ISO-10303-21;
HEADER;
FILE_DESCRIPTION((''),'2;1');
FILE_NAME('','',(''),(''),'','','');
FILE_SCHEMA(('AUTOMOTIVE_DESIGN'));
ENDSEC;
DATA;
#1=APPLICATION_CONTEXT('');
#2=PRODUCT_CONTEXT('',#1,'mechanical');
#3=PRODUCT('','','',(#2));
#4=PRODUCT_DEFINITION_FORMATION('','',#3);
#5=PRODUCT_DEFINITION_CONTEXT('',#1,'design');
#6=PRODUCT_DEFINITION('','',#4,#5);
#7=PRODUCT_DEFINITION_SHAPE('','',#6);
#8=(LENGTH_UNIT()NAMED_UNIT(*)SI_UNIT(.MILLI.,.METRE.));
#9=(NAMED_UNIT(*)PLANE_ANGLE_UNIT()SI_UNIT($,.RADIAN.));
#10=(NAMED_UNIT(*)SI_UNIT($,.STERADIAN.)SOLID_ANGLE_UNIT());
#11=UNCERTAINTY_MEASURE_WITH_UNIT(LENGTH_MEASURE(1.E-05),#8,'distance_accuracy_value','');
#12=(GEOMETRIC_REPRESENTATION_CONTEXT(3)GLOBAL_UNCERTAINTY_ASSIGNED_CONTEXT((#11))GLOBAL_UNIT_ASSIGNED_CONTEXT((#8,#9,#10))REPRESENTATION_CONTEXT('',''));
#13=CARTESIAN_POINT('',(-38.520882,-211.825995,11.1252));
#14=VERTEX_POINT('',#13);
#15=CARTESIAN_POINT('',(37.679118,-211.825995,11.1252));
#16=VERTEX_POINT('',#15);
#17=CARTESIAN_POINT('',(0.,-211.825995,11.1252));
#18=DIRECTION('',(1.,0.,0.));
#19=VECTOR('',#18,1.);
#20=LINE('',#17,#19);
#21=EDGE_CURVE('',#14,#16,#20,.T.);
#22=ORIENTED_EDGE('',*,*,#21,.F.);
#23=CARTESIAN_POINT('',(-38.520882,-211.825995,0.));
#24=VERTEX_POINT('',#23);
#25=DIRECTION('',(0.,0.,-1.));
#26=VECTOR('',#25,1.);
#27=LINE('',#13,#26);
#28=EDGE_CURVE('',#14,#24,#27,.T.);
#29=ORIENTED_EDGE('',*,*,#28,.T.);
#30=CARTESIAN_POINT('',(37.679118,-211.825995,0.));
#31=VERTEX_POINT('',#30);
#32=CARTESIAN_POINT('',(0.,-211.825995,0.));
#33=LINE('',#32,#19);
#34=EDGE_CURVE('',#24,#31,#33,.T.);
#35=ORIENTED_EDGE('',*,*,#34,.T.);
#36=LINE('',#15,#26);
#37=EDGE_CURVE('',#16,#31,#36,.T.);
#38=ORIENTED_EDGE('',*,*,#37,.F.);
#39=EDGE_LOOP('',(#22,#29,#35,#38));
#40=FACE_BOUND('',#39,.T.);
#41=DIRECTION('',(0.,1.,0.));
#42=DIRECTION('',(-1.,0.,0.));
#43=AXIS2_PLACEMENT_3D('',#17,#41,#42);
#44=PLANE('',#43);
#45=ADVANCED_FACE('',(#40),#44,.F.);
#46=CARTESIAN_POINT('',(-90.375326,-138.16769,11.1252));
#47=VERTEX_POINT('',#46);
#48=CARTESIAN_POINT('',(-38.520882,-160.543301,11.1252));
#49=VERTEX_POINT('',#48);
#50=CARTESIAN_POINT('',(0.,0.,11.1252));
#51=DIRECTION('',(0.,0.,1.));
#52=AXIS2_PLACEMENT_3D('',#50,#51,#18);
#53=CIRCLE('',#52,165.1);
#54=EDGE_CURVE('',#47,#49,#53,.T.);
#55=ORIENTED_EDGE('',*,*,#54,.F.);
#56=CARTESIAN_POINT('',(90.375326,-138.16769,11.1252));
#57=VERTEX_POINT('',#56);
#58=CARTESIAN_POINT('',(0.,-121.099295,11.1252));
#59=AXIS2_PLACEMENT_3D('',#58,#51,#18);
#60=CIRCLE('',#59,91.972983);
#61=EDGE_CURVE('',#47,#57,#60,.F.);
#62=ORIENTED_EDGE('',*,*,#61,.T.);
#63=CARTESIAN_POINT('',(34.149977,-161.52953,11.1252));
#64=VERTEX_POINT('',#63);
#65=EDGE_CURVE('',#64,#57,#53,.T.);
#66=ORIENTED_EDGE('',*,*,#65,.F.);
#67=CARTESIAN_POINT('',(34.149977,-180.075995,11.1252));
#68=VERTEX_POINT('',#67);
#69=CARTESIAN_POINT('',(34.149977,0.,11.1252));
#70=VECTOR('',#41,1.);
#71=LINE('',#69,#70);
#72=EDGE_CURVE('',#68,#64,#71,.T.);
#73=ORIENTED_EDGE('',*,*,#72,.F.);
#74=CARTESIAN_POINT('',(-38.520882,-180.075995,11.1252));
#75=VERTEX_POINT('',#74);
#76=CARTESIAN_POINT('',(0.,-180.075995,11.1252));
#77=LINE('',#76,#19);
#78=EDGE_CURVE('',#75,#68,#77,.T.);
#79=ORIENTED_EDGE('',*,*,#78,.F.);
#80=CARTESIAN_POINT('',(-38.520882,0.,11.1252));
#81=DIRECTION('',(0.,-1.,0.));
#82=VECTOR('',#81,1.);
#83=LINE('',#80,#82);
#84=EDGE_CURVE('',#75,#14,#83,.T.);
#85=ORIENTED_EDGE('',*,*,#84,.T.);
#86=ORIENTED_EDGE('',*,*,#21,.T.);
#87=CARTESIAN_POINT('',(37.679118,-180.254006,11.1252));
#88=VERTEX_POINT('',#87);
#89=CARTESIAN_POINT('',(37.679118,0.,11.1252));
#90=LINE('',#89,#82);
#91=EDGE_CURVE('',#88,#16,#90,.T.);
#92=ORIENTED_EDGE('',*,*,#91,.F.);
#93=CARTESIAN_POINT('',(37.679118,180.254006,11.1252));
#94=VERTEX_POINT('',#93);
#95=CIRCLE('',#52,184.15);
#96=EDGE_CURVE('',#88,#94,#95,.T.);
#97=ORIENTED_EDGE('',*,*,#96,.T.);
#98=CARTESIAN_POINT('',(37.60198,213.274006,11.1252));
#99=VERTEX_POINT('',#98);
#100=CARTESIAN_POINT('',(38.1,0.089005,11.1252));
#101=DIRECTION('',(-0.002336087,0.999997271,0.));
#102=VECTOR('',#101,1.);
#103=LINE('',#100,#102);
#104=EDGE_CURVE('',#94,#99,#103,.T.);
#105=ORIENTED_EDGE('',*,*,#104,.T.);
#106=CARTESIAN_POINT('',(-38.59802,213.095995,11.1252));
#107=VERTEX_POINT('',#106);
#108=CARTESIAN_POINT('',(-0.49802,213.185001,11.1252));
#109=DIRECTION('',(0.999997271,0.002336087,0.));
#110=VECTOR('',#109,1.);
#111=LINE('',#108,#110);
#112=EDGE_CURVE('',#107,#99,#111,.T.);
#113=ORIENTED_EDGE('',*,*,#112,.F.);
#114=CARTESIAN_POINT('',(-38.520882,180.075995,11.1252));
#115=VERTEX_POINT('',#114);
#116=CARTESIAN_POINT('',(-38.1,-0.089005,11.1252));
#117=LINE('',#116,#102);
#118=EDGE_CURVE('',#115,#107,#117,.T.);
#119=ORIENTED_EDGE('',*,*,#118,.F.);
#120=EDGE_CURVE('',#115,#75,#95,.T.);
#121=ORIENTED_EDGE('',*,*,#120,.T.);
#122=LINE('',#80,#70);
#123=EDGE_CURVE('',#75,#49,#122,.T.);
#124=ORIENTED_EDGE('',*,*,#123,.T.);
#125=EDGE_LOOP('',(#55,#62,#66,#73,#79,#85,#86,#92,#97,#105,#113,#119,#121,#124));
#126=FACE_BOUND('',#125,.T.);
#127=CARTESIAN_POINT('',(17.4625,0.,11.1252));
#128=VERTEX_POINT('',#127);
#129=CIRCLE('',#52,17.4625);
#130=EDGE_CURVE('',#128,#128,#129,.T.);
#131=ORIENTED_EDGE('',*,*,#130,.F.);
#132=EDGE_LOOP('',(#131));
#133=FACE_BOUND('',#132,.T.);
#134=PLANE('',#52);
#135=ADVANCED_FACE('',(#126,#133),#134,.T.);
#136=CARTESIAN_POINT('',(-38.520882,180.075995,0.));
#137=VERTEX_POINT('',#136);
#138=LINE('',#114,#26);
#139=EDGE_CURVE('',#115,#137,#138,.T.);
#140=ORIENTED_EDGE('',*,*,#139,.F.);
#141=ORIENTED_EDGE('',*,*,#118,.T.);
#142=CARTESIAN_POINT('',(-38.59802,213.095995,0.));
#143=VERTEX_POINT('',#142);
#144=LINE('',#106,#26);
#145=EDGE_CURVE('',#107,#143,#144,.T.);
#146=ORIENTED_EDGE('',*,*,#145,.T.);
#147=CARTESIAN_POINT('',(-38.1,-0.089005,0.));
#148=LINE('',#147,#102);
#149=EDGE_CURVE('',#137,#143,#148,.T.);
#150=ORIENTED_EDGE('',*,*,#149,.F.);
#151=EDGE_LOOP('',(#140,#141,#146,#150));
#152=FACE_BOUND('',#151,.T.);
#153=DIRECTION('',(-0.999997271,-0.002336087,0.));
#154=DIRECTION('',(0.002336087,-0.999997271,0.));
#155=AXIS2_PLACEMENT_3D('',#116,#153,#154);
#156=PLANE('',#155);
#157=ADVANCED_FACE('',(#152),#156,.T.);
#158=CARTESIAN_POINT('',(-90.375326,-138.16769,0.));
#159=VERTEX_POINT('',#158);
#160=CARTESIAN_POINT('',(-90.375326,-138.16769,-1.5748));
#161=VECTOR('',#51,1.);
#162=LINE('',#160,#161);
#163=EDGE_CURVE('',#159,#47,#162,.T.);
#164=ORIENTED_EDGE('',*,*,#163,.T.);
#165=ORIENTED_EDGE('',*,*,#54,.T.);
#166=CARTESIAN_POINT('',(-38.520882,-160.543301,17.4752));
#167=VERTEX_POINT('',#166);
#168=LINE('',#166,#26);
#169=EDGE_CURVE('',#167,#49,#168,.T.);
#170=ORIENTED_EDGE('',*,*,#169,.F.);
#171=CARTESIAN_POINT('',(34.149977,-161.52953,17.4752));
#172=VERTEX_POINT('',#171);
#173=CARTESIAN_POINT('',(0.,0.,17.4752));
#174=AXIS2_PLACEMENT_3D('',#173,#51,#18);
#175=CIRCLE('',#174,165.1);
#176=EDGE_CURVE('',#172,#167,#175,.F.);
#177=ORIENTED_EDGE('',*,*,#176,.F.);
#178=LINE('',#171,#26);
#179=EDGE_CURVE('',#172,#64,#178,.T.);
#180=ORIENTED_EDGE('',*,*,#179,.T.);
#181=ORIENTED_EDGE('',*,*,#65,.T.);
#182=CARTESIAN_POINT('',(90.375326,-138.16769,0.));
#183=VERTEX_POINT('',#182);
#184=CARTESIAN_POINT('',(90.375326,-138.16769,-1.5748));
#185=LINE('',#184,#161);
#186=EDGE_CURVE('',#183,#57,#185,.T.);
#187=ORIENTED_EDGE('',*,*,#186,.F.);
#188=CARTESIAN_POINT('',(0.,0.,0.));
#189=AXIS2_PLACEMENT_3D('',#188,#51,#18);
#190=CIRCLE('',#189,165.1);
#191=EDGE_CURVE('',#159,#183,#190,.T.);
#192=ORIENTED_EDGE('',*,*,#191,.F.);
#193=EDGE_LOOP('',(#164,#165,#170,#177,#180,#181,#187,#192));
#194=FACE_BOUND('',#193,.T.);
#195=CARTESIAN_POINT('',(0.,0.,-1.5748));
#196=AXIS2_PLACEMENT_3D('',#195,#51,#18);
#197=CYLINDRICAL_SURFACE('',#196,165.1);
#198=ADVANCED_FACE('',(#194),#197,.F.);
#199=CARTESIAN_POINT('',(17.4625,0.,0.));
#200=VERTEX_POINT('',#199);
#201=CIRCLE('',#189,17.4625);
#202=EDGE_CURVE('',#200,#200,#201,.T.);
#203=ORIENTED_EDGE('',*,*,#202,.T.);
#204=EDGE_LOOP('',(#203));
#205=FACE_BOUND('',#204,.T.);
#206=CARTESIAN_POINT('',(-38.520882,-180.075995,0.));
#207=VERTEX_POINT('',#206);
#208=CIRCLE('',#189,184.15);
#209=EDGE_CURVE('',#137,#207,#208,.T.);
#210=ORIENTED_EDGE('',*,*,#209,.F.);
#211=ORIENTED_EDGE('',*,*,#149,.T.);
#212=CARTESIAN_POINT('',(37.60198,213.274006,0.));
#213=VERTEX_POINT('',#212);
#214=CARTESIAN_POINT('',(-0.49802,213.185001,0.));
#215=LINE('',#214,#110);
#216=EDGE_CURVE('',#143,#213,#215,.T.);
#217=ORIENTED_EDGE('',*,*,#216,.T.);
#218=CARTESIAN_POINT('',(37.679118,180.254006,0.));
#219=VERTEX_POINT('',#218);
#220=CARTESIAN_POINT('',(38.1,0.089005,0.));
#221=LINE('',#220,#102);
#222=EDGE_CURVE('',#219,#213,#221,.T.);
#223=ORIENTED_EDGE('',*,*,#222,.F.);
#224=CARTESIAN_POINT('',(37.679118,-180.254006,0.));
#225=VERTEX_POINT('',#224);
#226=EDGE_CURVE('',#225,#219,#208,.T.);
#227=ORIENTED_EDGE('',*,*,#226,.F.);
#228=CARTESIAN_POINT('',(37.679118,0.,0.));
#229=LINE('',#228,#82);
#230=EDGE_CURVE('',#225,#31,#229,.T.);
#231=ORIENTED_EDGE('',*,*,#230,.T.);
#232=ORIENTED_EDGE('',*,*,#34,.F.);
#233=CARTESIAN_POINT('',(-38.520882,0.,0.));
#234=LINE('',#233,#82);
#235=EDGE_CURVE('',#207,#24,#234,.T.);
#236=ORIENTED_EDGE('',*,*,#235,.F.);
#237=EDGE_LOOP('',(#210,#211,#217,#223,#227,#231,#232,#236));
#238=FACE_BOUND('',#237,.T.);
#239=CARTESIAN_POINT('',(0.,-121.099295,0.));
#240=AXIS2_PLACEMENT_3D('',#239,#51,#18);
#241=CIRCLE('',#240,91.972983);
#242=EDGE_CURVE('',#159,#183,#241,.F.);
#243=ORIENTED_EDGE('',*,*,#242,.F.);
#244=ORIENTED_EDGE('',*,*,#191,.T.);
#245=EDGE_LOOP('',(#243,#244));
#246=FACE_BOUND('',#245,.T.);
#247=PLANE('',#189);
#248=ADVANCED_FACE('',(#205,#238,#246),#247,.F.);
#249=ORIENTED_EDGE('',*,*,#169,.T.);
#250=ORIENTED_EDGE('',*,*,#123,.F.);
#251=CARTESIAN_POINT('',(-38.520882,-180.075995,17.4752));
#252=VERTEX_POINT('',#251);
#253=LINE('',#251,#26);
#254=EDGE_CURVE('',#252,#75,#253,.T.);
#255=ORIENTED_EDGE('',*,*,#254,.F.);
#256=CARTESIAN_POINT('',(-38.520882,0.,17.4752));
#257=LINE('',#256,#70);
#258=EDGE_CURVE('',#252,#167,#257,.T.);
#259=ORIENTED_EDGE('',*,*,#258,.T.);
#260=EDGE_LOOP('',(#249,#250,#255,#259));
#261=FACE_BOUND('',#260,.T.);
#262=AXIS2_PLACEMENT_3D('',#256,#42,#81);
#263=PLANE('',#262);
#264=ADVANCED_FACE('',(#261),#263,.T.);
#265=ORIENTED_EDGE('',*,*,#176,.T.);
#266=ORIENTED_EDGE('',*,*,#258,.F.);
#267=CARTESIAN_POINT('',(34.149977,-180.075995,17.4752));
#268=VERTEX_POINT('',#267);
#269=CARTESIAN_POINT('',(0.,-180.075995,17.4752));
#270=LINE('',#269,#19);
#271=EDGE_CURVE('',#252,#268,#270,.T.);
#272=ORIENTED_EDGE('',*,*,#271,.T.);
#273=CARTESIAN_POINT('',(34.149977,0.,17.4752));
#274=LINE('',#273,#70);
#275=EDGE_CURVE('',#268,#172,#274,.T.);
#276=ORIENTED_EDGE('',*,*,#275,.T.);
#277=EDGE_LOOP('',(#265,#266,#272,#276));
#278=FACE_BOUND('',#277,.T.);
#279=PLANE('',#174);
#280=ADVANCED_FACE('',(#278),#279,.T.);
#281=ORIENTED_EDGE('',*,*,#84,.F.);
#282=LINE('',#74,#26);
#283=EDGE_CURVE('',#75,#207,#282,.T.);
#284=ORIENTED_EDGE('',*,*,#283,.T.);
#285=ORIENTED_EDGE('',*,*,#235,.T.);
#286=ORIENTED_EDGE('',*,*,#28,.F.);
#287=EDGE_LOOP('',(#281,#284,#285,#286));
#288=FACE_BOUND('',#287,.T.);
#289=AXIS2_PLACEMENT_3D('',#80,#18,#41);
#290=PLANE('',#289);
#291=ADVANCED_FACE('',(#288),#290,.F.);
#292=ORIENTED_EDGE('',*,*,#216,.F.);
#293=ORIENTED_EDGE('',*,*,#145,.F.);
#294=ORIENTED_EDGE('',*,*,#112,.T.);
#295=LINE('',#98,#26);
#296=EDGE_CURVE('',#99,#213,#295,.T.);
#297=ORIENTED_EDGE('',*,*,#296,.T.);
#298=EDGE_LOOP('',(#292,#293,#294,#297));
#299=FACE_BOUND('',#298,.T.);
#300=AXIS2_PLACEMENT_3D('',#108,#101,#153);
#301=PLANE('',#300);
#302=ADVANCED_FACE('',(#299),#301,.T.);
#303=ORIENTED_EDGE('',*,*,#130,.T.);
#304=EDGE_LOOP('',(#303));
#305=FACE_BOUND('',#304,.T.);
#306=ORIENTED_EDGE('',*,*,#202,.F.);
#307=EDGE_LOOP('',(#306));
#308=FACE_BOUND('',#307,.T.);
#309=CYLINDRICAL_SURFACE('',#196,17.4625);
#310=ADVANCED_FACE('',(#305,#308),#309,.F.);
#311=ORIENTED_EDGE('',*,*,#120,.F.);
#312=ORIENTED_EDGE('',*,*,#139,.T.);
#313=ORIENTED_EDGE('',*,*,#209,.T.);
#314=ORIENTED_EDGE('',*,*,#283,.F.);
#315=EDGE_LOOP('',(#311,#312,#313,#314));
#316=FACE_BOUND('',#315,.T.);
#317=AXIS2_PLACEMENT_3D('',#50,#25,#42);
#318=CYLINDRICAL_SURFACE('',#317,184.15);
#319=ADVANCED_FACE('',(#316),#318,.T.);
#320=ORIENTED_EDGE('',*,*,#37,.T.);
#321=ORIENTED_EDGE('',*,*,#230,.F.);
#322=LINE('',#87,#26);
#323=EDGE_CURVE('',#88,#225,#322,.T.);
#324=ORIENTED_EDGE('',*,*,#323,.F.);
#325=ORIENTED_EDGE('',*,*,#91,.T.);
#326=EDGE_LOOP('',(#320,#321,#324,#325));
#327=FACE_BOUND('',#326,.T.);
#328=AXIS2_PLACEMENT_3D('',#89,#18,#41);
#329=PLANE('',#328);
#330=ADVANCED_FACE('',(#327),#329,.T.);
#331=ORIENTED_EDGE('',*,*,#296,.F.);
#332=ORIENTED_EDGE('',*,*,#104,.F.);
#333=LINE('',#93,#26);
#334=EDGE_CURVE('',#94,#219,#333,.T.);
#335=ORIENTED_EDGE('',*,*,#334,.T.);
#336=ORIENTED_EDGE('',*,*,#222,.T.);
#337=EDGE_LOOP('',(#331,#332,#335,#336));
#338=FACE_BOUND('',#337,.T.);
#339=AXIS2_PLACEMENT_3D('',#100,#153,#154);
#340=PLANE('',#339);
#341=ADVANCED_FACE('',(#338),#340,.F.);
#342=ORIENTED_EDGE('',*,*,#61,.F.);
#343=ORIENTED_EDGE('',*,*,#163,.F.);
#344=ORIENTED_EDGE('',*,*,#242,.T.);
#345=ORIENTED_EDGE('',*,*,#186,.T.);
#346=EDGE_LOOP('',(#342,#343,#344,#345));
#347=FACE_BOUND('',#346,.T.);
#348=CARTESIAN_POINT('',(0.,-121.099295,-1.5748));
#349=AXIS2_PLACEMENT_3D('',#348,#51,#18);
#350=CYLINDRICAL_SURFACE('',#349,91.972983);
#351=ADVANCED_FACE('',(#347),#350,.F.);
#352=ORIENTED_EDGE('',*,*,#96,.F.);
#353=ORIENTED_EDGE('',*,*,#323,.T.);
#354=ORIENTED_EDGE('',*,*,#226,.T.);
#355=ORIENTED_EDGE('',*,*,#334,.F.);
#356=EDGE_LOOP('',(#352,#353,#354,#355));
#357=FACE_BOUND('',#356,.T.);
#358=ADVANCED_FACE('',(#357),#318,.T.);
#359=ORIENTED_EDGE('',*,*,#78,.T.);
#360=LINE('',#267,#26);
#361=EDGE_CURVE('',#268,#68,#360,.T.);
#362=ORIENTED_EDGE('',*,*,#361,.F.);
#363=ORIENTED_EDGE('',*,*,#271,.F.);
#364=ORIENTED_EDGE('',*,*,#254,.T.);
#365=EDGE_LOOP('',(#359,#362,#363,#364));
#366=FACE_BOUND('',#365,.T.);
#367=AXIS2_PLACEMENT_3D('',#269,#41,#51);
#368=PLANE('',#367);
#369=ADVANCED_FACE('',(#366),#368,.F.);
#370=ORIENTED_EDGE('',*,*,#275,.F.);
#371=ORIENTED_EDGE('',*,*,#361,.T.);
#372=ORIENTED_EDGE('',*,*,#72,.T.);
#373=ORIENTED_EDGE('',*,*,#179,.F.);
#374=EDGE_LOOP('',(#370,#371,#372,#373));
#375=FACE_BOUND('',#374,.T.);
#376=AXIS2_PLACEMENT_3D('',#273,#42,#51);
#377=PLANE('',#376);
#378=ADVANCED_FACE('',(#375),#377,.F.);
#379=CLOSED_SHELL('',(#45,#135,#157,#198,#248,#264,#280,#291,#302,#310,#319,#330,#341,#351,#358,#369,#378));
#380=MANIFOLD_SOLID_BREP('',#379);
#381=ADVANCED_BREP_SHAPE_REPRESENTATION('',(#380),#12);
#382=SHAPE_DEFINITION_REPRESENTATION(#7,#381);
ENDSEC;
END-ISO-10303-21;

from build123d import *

# Parameters (mm, degrees)
BOSS_EXTRUDE1_DEPTH = 11.1252
SKETCH5_R           = 17.4625
CUT_EXTRUDE1_DEPTH  = 12.7
CUT_EXTRUDE4_DEPTH  = 12.7
BOSS_EXTRUDE2_START = 6.35
BOSS_EXTRUDE2_DEPTH = 6.35


with BuildPart() as part:
    # Sketch1 → Boss-Extrude1 (new body)
    with BuildSketch(Plane.XY):
        with BuildLine():
            Line((-38.598020157, 213.095995412), (-38.52088234, 180.075995412))
            ThreePointArc((-38.52088234, 180.075995412), (-184.15, 0), (-38.52088234, -180.075995412))
            Line((-38.52088234, -180.075995412), (-38.52088234, -211.825995412))
            Line((-38.52088234, -211.825995412), (37.67911766, -211.825995412))
            Line((37.67911766, -211.825995412), (37.67911766, -180.254005759))
            ThreePointArc((37.67911766, -180.254005759), (184.15, 0), (37.67911766, 180.254005759))
            Line((37.67911766, 180.254005759), (37.601979843, 213.274005759))
            Line((37.601979843, 213.274005759), (-38.598020157, 213.095995412))
        make_face()
    extrude(amount=BOSS_EXTRUDE1_DEPTH)

    # Sketch5 → Cut-Extrude1 (cut)
    with BuildSketch(Plane.XY.offset(11.1252)):
        Circle(SKETCH5_R)
    extrude(amount=-CUT_EXTRUDE1_DEPTH, mode=Mode.SUBTRACT)

    # Sketch6 → Cut-Extrude4 (cut)
    with BuildSketch(Plane.XY.offset(11.1252)):
        with BuildLine():
            ThreePointArc((90.375326038, -138.167689579), (0, -29.126312042), (-90.375326038, -138.167689579))
            ThreePointArc((-90.375326038, -138.167689579), (0, -165.1), (90.375326038, -138.167689579))
        make_face()
    extrude(amount=-CUT_EXTRUDE4_DEPTH, mode=Mode.SUBTRACT)

    # Sketch7 → Boss-Extrude2 (add)
    with BuildSketch(Plane.XY.offset(11.1252).offset(BOSS_EXTRUDE2_START)):
        with BuildLine():
            Line((-38.52088234, -160.543301398), (-38.52088234, -180.075995412))
            Line((-38.52088234, -180.075995412), (34.149976763, -180.075995412))
            Line((34.149976763, -180.075995412), (34.149976763, -161.529530078))
            ThreePointArc((34.149976763, -161.529530078), (-2.240394082, -165.084798314), (-38.52088234, -160.543301398))
        make_face()
    extrude(amount=-BOSS_EXTRUDE2_DEPTH)


solid = part.part
